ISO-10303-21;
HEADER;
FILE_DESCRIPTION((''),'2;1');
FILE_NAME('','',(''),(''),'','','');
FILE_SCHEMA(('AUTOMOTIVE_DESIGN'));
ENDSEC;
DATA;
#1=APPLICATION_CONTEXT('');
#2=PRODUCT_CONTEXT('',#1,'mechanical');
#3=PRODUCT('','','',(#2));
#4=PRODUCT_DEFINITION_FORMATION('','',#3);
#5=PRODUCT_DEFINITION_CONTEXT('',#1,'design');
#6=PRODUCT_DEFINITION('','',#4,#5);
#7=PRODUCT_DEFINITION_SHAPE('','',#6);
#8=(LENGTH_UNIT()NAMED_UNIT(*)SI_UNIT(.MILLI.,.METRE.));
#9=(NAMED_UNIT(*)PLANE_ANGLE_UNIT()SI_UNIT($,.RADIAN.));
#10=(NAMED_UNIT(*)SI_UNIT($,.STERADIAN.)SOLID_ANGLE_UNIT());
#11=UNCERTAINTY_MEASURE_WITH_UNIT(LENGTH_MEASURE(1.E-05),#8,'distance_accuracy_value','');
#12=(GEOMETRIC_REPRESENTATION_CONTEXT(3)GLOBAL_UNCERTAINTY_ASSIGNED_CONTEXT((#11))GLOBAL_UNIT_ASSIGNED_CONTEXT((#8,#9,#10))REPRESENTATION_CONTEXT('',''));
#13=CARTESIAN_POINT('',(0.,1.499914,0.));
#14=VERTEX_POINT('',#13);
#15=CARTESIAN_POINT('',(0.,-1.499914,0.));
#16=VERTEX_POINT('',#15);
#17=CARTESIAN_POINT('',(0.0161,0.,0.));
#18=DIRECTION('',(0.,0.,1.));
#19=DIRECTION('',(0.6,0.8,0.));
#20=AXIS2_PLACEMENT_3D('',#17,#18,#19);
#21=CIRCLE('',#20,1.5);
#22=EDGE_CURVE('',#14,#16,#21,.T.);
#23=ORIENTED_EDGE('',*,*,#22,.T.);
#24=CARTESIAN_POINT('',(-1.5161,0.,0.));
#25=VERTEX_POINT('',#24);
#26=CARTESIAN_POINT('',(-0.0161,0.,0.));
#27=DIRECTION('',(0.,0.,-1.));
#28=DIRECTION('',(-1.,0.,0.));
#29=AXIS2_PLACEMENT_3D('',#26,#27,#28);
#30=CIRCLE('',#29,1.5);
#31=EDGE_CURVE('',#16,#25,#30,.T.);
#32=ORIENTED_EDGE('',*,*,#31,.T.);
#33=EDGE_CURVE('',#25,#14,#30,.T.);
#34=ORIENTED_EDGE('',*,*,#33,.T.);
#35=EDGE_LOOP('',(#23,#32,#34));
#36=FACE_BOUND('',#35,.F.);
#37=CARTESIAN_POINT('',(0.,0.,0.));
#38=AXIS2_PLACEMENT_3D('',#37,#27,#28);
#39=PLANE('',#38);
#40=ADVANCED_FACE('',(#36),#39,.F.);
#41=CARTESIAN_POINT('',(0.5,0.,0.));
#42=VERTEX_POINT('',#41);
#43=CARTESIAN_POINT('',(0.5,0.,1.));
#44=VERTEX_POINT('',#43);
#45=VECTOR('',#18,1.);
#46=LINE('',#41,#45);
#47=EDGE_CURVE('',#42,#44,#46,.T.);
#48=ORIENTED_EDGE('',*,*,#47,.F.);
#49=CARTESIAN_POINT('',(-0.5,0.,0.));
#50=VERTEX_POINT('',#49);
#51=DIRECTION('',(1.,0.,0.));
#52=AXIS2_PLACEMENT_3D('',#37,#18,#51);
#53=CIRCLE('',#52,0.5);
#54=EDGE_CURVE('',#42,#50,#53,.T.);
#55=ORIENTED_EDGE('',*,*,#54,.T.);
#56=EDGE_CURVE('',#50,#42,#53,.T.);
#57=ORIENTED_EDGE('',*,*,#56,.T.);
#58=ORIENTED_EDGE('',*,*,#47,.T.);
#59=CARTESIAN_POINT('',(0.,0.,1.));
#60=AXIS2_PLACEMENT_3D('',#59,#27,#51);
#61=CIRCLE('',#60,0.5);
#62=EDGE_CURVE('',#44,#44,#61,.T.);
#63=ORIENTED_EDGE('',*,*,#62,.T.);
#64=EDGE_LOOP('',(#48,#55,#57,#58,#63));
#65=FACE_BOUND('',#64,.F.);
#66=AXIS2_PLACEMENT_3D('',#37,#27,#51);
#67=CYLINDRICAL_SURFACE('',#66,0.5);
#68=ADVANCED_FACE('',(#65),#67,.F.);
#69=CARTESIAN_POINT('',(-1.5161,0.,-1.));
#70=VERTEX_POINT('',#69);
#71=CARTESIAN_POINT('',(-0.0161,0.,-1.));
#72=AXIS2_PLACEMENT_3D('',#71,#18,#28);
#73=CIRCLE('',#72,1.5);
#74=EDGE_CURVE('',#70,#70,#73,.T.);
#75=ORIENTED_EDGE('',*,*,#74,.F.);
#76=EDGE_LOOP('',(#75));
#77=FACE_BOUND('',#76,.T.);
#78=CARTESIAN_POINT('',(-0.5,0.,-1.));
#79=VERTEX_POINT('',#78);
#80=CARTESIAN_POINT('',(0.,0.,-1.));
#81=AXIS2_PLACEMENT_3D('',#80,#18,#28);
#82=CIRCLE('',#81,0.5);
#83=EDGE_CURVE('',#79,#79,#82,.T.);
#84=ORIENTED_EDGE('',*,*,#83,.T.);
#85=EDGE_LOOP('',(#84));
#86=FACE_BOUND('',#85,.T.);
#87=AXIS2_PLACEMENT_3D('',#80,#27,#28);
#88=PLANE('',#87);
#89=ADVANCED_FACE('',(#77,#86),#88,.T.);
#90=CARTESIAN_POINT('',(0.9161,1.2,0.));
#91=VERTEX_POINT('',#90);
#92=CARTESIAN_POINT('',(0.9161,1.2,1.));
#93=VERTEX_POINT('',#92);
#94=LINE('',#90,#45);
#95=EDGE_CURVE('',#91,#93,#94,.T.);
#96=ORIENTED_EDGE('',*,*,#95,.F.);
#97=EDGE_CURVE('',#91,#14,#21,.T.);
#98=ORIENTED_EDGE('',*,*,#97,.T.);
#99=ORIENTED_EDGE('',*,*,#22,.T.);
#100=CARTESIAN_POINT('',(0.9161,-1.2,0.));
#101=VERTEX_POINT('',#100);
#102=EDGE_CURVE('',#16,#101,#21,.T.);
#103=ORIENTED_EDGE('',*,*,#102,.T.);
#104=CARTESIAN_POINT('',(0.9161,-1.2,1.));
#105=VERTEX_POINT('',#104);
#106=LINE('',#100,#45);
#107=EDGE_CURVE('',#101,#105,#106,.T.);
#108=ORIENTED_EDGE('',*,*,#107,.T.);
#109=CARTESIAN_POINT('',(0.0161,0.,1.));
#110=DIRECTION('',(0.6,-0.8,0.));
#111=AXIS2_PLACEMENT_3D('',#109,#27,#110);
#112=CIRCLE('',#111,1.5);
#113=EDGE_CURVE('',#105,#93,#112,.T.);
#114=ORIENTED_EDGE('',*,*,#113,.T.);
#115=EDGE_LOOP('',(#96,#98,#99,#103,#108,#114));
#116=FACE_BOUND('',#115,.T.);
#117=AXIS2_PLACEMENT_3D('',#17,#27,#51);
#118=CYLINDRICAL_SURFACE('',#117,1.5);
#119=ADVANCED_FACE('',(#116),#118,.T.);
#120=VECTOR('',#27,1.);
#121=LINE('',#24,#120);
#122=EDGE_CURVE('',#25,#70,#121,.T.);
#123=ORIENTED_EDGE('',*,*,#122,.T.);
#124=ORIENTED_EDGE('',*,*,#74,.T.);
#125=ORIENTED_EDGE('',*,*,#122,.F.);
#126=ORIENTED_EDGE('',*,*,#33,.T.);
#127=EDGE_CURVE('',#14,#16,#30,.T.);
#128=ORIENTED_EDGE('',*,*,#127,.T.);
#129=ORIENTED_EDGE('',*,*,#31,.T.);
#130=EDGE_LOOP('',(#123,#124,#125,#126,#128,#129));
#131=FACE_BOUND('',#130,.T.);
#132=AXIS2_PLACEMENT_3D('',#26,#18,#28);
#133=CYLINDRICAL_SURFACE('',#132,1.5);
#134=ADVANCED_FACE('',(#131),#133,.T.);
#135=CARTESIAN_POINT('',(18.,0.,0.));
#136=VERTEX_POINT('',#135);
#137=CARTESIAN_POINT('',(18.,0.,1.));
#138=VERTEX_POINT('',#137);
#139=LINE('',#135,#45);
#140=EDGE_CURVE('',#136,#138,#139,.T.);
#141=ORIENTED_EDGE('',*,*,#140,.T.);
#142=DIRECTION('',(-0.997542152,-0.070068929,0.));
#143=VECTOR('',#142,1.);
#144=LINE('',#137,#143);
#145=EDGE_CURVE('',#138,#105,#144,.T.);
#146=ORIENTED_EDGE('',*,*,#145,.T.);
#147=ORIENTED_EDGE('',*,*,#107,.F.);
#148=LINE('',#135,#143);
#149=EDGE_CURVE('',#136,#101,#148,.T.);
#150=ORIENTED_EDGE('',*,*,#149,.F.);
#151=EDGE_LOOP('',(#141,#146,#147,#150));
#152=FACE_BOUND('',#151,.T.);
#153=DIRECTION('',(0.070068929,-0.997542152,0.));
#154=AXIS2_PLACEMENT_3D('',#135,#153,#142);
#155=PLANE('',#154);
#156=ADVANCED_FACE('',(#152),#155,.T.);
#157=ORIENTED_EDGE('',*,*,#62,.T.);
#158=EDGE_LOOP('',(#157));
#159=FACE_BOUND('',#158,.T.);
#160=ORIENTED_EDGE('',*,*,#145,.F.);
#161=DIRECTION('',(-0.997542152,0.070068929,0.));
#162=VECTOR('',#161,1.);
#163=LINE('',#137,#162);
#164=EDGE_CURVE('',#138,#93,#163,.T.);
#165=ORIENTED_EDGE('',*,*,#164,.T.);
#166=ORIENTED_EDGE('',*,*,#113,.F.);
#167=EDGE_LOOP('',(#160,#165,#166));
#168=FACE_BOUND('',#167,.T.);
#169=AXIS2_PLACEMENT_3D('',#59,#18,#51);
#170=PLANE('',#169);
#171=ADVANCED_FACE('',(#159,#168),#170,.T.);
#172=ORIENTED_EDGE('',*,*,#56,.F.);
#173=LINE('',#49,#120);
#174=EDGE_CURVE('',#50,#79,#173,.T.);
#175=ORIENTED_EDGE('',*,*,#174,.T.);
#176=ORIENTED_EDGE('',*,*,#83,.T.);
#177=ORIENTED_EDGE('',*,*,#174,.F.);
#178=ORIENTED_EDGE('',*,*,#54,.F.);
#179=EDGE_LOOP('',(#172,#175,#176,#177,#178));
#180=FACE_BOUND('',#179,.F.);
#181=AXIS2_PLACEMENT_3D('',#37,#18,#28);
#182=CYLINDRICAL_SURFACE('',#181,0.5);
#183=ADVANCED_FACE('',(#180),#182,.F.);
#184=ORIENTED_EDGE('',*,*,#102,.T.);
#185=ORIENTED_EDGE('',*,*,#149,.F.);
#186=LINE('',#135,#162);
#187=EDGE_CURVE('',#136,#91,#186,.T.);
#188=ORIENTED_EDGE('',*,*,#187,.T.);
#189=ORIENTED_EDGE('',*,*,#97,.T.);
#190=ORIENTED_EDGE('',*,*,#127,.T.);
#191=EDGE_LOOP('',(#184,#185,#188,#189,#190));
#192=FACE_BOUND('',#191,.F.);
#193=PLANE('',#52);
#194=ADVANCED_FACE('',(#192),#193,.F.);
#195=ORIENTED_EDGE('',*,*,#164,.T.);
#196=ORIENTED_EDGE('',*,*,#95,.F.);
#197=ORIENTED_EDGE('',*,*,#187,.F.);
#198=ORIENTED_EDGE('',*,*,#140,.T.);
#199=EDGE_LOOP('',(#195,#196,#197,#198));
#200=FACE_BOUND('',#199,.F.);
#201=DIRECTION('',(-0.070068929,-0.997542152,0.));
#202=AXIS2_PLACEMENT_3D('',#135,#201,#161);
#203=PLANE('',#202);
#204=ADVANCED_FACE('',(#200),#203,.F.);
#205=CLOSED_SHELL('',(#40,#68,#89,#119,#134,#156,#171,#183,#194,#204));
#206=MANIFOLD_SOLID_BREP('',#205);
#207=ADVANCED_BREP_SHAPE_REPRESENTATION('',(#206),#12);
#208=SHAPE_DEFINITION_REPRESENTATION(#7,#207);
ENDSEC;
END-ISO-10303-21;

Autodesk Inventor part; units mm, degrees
ref_plane "YZ Plane" through (0, 0, 0) normal (1, 0, 0) x (0, 1, 0)
ref_plane "XZ Plane" through (0, 0, 0) normal (0, 1, 0) x (-1, 0, 0)
ref_plane "XY Plane" through (0, 0, 0) normal (0, 0, 1) x (1, 0, 0)
sketch "Sketch1" plane through (0, 0, 0) normal (0, 0, 1) x (1, 0, 0)
  circle A0 centre (0, 0) radius 0.5
  circle A1 centre (0.0161, 0) radius 1.5
  line L0 (-5.3807, 0) -> (21.8968, 0) projected
  line L1 (0.0161, 0) -> (15.0161, 0)
  line L2 (15.0161, 0) -> (18, 0)
  line L3 (18, 0) -> (0.9161, 1.2)
  line L4 (18, 0) -> (0.9161, -1.2)
  dimension "d0" = 1
  dimension "d1" = 3
  dimension "d3" = 2.4
  dimension "d13" = 18
extrude "Extrusion1" add sketch "Sketch1" along normal blind 1 contours L0 A1 A0 | A0 L0 A1 | L0 L4 A1 | A1 L3 L0
sketch "Sketch2" plane through (0, 0, 0) normal (0, 0, -1) x (-1, 0, 0)
  circle A0 centre (0, 0) radius 0.5
  circle A1 centre (0.0161, 0) radius 1.5
  line L0 (-5.7839, 0) -> (24.3161, 0)
  line L1 (0.0161, 0) -> (20.0161, 0)
  line L2 (20.0161, 0) -> (20.0155, 0)
  line L3 (20.0155, 0) -> (0.8452, 1.25)
  line L4 (20.0155, 0) -> (0.8452, -1.25)
  dimension "d6" = 1
  dimension "d7" = 3
  dimension "d8" = 20
  dimension "d9" = 2.5
extrude "Extrusion2" add sketch "Sketch2" along normal blind 1 contours L0 A1 A0 | A0 L0 A1
equation "\"d0\" = pointer_axis"
equation "\"d1\" = pointer_axis_outside"
equation "\"d3\" = 0.8 * pointer_axis_outside"
equation "\"d13\" = pointer_length"
equation "\"circle_dimension\" = 56"
equation "\"circle_dimension_inner\" = 47"
equation "\"hole_from_center\" = 63.5"
equation "\"hole_distance\" = 22.45064"
equation "\"ring_depth\" = 6"
equation "\"ring_thickness\" = 9"
equation "\"ring_top_thickness\" = 2"
equation "\"ring_outer_bevel_height\" = 3"
equation "\"ring_outer_bevel_depth\" = 0.5"
equation "\"ring_inner_bevel_depth\" = 3.5"
equation "\"screw_distance_center\" = 15"
equation "\"screw_distance_outside\" = 3.5"
equation "\"front_plate_thickness\" = 2"
equation "\"glass_thickness\" = 2"
equation "\"encoders\" = 0"
equation "\"encoder_axis\" = 8"
equation "\"encoder_emboss\" = 0"
equation "\"encoder_width\" = 27"
equation "\"encoder_rad\" = 49"
equation "\"encoder_extrude_hight\" = 3"
equation "\"pointer_axis\" = 1"
equation "\"pointer_axis_outside\" = 3"
equation "\"pointer_length\" = 18"
properties part number "pointer_small" material "ABS Plastic"
